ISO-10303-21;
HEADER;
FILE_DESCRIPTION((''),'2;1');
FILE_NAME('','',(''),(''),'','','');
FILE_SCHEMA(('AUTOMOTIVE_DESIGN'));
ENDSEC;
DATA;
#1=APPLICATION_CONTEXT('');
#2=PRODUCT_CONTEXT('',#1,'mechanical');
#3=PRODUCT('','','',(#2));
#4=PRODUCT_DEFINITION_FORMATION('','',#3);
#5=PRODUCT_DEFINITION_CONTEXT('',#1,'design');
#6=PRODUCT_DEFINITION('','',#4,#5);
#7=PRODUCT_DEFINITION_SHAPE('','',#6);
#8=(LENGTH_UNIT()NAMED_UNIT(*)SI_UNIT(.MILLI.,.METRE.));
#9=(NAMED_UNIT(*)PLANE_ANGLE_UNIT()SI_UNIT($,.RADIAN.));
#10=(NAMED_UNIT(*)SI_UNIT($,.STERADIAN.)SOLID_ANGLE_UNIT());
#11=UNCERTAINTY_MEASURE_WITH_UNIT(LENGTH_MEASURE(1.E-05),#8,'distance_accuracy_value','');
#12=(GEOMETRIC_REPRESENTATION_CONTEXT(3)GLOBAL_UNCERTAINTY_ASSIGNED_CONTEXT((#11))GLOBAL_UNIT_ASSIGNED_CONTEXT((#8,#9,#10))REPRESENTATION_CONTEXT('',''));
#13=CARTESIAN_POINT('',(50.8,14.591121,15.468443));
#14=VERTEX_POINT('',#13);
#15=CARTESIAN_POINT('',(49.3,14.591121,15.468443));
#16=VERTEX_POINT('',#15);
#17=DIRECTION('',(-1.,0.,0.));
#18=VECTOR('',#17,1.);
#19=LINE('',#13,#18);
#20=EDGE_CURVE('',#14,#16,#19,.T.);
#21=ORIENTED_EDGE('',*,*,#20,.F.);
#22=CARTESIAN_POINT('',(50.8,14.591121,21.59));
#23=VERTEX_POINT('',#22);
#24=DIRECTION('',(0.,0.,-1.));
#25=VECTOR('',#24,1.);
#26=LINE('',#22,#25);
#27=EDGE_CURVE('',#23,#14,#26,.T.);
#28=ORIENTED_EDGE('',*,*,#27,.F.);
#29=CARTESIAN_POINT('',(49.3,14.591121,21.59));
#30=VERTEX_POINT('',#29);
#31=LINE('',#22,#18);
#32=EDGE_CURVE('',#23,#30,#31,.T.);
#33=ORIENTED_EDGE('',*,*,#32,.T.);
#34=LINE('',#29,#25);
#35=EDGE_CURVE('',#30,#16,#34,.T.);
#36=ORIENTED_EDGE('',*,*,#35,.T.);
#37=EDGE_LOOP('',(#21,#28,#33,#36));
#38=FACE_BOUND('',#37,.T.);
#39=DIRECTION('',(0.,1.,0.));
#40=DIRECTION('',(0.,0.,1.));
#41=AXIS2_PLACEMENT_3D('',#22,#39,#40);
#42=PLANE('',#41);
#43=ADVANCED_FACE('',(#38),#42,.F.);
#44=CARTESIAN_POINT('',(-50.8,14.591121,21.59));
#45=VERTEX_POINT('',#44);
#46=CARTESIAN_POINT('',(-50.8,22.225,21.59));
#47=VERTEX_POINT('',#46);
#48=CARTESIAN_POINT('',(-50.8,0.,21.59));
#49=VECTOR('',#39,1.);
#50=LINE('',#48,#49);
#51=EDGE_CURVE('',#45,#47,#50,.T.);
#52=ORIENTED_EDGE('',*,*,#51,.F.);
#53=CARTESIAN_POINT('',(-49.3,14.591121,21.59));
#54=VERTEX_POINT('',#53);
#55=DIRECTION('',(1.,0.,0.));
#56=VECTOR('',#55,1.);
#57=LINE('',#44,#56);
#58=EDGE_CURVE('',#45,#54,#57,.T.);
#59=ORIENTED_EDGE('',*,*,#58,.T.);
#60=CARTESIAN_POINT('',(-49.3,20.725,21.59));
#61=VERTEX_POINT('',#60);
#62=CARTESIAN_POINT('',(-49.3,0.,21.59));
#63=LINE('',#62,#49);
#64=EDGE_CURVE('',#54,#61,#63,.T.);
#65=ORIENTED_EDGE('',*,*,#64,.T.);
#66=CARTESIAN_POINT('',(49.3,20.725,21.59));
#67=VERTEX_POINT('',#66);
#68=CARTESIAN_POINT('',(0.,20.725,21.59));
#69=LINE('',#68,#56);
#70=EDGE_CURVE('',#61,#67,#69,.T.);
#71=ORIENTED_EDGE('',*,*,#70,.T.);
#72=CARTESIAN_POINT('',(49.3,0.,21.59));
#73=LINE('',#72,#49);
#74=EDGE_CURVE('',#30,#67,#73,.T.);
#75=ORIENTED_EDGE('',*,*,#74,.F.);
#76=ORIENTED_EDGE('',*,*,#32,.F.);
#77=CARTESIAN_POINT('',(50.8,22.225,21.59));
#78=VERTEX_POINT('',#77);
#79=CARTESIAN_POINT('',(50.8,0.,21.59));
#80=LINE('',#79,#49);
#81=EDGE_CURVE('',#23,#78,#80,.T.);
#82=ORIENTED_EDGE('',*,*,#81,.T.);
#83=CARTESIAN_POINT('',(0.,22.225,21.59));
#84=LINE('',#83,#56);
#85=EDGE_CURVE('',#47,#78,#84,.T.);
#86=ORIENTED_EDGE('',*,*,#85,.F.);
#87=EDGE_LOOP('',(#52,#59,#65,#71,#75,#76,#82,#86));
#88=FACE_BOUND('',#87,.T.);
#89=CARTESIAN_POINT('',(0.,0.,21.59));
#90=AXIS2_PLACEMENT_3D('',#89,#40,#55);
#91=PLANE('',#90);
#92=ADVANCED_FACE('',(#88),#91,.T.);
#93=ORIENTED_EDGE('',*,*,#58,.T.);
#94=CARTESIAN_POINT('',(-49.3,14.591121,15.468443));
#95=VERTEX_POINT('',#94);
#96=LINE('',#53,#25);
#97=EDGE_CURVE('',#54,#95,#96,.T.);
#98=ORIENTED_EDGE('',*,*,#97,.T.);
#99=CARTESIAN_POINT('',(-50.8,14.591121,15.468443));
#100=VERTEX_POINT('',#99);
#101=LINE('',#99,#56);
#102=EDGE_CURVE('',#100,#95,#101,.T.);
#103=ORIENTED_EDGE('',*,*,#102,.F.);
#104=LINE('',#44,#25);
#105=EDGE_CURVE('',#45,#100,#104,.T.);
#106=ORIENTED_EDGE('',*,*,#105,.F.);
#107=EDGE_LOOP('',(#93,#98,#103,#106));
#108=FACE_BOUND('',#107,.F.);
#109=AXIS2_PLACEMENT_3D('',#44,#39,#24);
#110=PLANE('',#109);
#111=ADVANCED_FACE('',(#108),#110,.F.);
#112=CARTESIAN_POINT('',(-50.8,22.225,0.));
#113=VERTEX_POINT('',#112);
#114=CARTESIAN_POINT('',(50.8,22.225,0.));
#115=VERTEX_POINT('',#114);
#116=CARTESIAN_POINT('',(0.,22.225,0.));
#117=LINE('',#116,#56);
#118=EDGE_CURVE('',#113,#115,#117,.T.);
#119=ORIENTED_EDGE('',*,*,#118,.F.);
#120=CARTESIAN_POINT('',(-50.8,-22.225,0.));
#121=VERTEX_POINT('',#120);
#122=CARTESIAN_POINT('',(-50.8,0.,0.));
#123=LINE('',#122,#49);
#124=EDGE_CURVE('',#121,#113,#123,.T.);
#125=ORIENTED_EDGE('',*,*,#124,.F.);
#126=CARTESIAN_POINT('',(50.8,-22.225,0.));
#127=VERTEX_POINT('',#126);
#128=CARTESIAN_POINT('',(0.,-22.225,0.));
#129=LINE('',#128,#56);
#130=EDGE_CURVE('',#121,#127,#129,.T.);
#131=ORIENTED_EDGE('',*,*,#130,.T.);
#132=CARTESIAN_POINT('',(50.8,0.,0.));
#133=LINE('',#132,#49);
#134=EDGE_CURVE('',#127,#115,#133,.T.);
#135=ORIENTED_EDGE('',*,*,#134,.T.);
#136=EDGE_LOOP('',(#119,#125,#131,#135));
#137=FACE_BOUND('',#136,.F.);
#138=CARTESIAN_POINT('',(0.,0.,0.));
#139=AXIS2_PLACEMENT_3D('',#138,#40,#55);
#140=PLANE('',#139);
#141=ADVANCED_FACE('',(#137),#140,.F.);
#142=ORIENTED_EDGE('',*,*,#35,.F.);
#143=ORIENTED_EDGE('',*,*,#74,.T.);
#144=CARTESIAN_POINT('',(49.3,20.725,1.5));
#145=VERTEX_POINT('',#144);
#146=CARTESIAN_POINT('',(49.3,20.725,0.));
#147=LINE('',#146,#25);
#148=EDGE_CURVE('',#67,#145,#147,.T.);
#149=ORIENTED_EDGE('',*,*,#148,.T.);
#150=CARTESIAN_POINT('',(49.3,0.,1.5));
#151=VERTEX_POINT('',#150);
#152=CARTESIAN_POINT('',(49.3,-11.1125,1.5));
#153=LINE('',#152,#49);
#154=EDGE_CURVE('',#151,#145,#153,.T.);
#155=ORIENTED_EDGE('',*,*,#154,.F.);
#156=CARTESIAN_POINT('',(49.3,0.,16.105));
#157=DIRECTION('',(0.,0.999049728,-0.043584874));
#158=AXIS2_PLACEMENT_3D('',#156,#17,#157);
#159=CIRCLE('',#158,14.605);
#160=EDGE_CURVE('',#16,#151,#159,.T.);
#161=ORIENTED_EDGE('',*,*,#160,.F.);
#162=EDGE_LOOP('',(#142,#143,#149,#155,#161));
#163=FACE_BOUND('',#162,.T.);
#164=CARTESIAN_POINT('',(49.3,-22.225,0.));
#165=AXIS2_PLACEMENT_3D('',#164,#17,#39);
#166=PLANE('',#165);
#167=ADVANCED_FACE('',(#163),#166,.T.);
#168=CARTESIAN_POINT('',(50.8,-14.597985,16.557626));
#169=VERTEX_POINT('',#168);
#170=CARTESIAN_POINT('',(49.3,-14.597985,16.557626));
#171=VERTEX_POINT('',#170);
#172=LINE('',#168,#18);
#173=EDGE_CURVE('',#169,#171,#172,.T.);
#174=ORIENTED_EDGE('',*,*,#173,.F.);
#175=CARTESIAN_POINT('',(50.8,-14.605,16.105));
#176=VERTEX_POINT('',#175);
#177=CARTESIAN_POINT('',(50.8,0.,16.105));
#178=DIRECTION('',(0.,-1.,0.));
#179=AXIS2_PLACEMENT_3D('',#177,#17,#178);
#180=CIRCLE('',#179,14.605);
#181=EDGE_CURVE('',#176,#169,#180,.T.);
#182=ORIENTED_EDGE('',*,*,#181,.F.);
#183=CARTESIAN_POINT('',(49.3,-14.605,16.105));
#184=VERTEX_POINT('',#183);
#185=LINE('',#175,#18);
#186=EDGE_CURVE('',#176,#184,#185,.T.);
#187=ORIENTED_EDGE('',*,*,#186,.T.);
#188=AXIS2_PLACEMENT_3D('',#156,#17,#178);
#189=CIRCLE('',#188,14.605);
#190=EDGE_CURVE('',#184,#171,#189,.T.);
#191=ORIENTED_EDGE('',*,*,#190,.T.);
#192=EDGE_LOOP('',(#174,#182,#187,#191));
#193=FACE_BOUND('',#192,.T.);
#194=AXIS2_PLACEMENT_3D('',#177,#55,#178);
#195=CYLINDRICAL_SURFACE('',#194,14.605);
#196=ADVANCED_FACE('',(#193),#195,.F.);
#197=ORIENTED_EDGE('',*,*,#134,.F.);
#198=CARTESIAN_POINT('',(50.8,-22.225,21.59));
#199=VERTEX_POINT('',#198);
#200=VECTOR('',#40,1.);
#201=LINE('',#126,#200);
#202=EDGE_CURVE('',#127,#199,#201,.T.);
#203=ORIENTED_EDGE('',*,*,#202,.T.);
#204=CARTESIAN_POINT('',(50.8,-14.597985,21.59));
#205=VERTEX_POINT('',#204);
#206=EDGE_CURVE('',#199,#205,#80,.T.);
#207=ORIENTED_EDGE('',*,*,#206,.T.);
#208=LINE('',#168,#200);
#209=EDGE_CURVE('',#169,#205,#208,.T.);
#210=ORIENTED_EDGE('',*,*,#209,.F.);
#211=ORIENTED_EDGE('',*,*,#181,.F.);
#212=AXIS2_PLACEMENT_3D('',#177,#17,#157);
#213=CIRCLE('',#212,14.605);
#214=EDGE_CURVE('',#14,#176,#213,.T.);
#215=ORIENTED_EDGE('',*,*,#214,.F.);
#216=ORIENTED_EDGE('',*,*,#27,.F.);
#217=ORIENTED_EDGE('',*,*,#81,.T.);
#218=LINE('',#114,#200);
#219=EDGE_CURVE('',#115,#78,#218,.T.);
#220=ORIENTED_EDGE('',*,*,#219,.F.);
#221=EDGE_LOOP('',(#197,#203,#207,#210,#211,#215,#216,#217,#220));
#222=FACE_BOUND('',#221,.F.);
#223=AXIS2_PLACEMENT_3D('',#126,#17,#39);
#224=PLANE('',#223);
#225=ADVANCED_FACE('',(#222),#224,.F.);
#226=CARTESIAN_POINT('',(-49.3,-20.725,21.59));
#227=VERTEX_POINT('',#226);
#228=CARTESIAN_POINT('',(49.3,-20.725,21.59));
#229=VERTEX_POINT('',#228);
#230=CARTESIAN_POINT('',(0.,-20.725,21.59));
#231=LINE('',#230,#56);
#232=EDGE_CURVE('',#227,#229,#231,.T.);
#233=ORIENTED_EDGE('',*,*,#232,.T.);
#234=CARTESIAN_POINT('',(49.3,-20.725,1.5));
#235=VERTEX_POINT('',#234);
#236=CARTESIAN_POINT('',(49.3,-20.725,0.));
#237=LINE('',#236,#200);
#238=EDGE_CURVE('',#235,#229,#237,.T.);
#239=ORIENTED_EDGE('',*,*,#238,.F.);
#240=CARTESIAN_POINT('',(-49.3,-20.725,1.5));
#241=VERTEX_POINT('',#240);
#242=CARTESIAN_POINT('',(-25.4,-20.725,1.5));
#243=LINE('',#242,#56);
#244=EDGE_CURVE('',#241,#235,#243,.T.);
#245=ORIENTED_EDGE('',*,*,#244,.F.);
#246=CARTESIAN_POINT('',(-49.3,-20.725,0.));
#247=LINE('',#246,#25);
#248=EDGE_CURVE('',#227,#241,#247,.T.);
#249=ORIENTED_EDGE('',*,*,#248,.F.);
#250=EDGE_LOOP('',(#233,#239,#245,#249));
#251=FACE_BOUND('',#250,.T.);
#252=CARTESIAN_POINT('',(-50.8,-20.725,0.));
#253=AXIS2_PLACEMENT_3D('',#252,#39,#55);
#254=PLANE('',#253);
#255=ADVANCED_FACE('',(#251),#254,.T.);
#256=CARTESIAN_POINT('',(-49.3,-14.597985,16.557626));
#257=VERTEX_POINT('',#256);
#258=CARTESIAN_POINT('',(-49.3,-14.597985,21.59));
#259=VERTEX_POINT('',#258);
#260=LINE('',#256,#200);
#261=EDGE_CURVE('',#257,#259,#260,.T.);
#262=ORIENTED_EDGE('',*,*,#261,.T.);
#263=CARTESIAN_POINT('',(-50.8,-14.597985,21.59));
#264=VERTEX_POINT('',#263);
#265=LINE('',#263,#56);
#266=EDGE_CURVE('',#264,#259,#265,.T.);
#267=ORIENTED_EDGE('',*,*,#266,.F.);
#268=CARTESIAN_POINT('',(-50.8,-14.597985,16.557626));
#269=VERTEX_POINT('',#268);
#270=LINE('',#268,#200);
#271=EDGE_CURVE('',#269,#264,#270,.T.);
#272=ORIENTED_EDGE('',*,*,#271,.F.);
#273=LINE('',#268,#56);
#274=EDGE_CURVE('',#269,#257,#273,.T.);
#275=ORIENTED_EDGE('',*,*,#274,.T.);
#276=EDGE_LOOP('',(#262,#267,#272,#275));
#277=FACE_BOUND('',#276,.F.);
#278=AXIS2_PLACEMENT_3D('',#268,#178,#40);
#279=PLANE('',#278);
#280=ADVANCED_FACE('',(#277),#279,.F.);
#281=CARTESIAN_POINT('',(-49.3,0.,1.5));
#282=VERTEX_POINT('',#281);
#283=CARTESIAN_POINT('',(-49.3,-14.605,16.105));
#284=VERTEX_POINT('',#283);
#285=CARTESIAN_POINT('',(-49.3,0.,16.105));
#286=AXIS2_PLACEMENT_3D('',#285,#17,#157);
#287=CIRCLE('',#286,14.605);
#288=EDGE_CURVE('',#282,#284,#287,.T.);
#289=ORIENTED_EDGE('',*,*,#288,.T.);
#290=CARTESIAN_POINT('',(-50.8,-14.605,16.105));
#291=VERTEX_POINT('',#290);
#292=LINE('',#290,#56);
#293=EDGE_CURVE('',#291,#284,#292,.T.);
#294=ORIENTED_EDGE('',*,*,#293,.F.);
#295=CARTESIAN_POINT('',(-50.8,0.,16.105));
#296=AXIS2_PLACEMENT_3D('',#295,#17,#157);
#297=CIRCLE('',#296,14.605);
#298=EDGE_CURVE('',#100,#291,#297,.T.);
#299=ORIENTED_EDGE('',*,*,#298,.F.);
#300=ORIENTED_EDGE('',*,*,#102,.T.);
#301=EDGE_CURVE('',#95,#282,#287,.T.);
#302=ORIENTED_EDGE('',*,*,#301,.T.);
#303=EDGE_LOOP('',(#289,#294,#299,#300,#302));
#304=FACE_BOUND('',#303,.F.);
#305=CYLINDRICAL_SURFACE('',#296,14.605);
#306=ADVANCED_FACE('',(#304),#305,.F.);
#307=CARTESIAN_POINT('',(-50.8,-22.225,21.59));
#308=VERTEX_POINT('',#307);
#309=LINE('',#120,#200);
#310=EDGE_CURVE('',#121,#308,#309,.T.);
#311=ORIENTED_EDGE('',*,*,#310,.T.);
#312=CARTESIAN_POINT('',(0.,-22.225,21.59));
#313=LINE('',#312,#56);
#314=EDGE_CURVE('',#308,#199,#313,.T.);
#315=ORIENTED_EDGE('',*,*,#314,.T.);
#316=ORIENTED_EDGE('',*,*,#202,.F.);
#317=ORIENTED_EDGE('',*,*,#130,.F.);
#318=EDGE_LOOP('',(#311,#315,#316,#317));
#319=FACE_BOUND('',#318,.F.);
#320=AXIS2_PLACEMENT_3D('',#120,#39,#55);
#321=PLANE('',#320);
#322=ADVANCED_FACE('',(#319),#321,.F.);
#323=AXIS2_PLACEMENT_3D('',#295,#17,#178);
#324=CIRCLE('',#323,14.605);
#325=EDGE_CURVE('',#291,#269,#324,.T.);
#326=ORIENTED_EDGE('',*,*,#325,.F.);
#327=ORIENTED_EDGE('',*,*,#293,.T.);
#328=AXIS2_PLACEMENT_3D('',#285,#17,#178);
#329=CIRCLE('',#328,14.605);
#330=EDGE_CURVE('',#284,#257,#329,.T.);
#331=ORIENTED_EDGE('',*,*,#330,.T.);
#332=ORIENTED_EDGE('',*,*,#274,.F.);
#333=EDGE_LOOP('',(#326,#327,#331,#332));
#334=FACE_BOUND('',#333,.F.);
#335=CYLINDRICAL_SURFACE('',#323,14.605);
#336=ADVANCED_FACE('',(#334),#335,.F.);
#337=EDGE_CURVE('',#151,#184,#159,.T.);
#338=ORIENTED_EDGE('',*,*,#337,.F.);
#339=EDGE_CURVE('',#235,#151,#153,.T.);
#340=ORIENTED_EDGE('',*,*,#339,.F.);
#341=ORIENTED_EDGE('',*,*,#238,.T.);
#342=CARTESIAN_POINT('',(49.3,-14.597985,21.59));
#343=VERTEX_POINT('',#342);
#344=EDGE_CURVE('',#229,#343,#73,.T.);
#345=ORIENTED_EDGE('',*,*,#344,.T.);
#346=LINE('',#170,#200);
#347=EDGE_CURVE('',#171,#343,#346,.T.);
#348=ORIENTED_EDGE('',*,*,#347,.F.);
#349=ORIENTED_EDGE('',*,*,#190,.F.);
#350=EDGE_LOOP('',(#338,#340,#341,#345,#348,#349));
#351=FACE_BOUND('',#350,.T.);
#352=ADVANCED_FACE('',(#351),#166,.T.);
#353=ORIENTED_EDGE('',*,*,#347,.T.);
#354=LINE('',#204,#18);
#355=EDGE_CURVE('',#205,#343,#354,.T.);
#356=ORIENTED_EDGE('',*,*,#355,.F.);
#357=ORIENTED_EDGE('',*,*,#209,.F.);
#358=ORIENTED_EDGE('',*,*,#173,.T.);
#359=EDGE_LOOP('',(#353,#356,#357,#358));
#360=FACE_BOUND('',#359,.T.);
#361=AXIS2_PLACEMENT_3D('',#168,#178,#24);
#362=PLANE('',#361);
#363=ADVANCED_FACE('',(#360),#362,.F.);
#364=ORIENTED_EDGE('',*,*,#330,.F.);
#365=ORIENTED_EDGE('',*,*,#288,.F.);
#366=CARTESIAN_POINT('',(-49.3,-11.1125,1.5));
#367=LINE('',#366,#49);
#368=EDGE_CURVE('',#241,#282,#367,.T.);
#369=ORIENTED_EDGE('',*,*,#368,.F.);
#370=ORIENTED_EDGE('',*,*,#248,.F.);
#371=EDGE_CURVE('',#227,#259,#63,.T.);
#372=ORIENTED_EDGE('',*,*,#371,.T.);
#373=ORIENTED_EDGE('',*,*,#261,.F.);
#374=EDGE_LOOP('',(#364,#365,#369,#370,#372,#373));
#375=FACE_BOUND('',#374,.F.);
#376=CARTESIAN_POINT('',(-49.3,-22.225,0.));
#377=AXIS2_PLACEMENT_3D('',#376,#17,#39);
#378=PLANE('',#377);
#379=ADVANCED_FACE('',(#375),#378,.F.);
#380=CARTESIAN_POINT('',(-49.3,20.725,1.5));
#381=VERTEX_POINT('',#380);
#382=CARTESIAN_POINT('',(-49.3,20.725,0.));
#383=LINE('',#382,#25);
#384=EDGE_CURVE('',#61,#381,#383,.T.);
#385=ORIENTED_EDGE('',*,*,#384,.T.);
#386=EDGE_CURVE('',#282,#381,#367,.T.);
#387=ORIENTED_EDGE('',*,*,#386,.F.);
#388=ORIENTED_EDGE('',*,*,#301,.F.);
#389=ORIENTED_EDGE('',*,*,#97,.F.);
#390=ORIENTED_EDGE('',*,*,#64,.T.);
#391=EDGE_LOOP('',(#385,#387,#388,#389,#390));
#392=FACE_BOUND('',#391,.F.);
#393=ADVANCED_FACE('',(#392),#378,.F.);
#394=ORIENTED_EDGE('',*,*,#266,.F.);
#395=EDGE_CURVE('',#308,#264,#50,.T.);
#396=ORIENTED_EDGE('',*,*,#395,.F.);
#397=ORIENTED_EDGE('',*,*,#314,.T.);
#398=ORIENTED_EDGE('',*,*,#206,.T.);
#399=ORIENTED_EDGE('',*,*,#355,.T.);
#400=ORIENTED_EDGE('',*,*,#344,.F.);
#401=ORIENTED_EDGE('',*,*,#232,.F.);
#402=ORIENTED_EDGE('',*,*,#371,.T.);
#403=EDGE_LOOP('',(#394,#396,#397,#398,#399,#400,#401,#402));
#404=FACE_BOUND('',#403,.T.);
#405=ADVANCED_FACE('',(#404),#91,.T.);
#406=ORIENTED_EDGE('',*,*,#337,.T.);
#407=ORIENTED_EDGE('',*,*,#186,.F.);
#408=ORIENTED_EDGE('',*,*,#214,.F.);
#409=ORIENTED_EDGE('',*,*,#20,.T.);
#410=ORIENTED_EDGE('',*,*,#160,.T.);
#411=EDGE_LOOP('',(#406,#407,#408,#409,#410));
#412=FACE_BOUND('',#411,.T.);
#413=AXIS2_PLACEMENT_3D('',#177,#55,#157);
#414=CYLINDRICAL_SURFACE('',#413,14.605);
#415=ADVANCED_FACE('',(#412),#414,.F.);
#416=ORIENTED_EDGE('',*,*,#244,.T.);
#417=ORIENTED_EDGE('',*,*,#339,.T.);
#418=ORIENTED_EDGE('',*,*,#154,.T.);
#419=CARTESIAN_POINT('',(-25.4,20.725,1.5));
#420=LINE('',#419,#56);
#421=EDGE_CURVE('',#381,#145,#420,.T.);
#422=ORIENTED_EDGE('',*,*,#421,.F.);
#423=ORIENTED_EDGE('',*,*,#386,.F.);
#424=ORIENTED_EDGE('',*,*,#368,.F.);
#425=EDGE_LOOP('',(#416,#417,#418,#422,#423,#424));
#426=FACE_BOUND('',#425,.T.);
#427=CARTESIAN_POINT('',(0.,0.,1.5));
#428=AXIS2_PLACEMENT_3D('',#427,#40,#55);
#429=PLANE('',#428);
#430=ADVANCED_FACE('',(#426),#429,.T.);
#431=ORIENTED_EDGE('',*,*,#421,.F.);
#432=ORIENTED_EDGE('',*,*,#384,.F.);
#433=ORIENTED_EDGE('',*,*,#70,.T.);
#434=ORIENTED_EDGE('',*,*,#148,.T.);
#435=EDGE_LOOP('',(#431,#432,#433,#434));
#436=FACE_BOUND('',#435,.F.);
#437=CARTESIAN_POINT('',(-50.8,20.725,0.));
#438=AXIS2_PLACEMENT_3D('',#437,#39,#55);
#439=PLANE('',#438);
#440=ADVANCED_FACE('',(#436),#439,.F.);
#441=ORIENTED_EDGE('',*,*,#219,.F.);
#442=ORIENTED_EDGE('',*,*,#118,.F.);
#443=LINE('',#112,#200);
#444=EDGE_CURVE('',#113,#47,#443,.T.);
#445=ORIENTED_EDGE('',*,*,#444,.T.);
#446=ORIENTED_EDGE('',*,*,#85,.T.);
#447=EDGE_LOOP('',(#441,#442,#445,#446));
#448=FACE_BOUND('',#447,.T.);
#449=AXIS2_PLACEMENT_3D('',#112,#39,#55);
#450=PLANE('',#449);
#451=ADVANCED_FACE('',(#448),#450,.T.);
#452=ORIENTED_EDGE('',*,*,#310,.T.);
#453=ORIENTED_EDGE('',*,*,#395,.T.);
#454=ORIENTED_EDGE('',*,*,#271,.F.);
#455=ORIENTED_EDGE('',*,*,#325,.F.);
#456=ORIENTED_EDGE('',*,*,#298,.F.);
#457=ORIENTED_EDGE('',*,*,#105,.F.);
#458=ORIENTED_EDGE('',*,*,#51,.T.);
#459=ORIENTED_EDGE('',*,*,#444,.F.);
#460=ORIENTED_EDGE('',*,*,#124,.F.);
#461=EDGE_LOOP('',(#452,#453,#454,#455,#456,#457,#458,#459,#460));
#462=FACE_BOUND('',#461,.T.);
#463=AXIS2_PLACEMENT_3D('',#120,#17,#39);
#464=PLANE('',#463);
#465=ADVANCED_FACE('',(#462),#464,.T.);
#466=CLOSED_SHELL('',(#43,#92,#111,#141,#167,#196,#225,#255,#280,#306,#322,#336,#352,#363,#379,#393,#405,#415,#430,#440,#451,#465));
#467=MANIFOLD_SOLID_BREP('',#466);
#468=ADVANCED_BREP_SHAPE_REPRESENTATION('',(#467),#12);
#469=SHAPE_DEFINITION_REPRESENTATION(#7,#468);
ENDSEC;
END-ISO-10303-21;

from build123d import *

# Parameters (mm, degrees)
F0_W     = 101.6
F0_H     = 44.45
F1_DEPTH = 21.59
F2_T     = -1.5
F4_DEPTH = 1.5


# Not quite as in the source:
# - a pattern or mirror of a feature is missing from the dataset's text; its kind, count and spacing are read off the source's solid


with BuildPart() as f1:
    # F0 (on Top) → F1 (new body)
    with BuildSketch(Plane.XY):
        Rectangle(F0_W, F0_H)
    extrude(amount=F1_DEPTH)

    # F2
    f2_openings = [f1.faces().sort_by_distance(p)[0] for p in [
        (0, 0, 21.59),
    ]]
    offset(amount=F2_T, openings=f2_openings)

    # F3 (on face) → F4 (cut)
    with BuildSketch(Plane(origin=(-50.8, 0, 0), x_dir=(0, -1, 0), z_dir=(-1, 0, 0))):
        with BuildLine():
            ThreePointArc((-14.5911212754, 15.4684429111), (0.3183541842, 1.5034700934), (14.605, 16.105))
            ThreePointArc((14.605, 16.105), (14.6032460444, 16.3313403807), (14.5979845987, 16.5576263976))
            ThreePointArc((14.5979845987, 16.5576263976), (14.290212434, 19.1209332868), (13.5359078011, 21.59))
            Line((13.5359078011, 21.59), (-13.5359078011, 21.59))
            ThreePointArc((-13.5359078011, 21.59), (-14.2709246664, 19.2109192145), (-14.5911212754, 16.7415570889))
            Line((-14.5911212754, 16.7415570889), (-14.5911212754, 15.4684429111))
        make_face()
        with BuildLine():
            ThreePointArc((13.5359078011, 21.59), (14.290212434, 19.1209332868), (14.5979845987, 16.5576263976))
            Line((14.5979845987, 16.5576263976), (14.5979845987, 21.59))
            Line((14.5979845987, 21.59), (13.5359078011, 21.59))
        make_face()
        with BuildLine():
            Line((-14.5911212754, 21.59), (-14.5911212754, 16.7415570889))
            ThreePointArc((-14.5911212754, 16.7415570889), (-14.2709246664, 19.2109192145), (-13.5359078011, 21.59))
            Line((-13.5359078011, 21.59), (-14.5911212754, 21.59))
        make_face()
    f4 = extrude(amount=-F4_DEPTH, mode=Mode.SUBTRACT)

    # F4_copies: F4 across plane
    add(f4.mirror(Plane(origin=(0, 0, 0), x_dir=(0, 0, 1), z_dir=(1, 0, 0))), mode=Mode.SUBTRACT)


solid = f1.part
